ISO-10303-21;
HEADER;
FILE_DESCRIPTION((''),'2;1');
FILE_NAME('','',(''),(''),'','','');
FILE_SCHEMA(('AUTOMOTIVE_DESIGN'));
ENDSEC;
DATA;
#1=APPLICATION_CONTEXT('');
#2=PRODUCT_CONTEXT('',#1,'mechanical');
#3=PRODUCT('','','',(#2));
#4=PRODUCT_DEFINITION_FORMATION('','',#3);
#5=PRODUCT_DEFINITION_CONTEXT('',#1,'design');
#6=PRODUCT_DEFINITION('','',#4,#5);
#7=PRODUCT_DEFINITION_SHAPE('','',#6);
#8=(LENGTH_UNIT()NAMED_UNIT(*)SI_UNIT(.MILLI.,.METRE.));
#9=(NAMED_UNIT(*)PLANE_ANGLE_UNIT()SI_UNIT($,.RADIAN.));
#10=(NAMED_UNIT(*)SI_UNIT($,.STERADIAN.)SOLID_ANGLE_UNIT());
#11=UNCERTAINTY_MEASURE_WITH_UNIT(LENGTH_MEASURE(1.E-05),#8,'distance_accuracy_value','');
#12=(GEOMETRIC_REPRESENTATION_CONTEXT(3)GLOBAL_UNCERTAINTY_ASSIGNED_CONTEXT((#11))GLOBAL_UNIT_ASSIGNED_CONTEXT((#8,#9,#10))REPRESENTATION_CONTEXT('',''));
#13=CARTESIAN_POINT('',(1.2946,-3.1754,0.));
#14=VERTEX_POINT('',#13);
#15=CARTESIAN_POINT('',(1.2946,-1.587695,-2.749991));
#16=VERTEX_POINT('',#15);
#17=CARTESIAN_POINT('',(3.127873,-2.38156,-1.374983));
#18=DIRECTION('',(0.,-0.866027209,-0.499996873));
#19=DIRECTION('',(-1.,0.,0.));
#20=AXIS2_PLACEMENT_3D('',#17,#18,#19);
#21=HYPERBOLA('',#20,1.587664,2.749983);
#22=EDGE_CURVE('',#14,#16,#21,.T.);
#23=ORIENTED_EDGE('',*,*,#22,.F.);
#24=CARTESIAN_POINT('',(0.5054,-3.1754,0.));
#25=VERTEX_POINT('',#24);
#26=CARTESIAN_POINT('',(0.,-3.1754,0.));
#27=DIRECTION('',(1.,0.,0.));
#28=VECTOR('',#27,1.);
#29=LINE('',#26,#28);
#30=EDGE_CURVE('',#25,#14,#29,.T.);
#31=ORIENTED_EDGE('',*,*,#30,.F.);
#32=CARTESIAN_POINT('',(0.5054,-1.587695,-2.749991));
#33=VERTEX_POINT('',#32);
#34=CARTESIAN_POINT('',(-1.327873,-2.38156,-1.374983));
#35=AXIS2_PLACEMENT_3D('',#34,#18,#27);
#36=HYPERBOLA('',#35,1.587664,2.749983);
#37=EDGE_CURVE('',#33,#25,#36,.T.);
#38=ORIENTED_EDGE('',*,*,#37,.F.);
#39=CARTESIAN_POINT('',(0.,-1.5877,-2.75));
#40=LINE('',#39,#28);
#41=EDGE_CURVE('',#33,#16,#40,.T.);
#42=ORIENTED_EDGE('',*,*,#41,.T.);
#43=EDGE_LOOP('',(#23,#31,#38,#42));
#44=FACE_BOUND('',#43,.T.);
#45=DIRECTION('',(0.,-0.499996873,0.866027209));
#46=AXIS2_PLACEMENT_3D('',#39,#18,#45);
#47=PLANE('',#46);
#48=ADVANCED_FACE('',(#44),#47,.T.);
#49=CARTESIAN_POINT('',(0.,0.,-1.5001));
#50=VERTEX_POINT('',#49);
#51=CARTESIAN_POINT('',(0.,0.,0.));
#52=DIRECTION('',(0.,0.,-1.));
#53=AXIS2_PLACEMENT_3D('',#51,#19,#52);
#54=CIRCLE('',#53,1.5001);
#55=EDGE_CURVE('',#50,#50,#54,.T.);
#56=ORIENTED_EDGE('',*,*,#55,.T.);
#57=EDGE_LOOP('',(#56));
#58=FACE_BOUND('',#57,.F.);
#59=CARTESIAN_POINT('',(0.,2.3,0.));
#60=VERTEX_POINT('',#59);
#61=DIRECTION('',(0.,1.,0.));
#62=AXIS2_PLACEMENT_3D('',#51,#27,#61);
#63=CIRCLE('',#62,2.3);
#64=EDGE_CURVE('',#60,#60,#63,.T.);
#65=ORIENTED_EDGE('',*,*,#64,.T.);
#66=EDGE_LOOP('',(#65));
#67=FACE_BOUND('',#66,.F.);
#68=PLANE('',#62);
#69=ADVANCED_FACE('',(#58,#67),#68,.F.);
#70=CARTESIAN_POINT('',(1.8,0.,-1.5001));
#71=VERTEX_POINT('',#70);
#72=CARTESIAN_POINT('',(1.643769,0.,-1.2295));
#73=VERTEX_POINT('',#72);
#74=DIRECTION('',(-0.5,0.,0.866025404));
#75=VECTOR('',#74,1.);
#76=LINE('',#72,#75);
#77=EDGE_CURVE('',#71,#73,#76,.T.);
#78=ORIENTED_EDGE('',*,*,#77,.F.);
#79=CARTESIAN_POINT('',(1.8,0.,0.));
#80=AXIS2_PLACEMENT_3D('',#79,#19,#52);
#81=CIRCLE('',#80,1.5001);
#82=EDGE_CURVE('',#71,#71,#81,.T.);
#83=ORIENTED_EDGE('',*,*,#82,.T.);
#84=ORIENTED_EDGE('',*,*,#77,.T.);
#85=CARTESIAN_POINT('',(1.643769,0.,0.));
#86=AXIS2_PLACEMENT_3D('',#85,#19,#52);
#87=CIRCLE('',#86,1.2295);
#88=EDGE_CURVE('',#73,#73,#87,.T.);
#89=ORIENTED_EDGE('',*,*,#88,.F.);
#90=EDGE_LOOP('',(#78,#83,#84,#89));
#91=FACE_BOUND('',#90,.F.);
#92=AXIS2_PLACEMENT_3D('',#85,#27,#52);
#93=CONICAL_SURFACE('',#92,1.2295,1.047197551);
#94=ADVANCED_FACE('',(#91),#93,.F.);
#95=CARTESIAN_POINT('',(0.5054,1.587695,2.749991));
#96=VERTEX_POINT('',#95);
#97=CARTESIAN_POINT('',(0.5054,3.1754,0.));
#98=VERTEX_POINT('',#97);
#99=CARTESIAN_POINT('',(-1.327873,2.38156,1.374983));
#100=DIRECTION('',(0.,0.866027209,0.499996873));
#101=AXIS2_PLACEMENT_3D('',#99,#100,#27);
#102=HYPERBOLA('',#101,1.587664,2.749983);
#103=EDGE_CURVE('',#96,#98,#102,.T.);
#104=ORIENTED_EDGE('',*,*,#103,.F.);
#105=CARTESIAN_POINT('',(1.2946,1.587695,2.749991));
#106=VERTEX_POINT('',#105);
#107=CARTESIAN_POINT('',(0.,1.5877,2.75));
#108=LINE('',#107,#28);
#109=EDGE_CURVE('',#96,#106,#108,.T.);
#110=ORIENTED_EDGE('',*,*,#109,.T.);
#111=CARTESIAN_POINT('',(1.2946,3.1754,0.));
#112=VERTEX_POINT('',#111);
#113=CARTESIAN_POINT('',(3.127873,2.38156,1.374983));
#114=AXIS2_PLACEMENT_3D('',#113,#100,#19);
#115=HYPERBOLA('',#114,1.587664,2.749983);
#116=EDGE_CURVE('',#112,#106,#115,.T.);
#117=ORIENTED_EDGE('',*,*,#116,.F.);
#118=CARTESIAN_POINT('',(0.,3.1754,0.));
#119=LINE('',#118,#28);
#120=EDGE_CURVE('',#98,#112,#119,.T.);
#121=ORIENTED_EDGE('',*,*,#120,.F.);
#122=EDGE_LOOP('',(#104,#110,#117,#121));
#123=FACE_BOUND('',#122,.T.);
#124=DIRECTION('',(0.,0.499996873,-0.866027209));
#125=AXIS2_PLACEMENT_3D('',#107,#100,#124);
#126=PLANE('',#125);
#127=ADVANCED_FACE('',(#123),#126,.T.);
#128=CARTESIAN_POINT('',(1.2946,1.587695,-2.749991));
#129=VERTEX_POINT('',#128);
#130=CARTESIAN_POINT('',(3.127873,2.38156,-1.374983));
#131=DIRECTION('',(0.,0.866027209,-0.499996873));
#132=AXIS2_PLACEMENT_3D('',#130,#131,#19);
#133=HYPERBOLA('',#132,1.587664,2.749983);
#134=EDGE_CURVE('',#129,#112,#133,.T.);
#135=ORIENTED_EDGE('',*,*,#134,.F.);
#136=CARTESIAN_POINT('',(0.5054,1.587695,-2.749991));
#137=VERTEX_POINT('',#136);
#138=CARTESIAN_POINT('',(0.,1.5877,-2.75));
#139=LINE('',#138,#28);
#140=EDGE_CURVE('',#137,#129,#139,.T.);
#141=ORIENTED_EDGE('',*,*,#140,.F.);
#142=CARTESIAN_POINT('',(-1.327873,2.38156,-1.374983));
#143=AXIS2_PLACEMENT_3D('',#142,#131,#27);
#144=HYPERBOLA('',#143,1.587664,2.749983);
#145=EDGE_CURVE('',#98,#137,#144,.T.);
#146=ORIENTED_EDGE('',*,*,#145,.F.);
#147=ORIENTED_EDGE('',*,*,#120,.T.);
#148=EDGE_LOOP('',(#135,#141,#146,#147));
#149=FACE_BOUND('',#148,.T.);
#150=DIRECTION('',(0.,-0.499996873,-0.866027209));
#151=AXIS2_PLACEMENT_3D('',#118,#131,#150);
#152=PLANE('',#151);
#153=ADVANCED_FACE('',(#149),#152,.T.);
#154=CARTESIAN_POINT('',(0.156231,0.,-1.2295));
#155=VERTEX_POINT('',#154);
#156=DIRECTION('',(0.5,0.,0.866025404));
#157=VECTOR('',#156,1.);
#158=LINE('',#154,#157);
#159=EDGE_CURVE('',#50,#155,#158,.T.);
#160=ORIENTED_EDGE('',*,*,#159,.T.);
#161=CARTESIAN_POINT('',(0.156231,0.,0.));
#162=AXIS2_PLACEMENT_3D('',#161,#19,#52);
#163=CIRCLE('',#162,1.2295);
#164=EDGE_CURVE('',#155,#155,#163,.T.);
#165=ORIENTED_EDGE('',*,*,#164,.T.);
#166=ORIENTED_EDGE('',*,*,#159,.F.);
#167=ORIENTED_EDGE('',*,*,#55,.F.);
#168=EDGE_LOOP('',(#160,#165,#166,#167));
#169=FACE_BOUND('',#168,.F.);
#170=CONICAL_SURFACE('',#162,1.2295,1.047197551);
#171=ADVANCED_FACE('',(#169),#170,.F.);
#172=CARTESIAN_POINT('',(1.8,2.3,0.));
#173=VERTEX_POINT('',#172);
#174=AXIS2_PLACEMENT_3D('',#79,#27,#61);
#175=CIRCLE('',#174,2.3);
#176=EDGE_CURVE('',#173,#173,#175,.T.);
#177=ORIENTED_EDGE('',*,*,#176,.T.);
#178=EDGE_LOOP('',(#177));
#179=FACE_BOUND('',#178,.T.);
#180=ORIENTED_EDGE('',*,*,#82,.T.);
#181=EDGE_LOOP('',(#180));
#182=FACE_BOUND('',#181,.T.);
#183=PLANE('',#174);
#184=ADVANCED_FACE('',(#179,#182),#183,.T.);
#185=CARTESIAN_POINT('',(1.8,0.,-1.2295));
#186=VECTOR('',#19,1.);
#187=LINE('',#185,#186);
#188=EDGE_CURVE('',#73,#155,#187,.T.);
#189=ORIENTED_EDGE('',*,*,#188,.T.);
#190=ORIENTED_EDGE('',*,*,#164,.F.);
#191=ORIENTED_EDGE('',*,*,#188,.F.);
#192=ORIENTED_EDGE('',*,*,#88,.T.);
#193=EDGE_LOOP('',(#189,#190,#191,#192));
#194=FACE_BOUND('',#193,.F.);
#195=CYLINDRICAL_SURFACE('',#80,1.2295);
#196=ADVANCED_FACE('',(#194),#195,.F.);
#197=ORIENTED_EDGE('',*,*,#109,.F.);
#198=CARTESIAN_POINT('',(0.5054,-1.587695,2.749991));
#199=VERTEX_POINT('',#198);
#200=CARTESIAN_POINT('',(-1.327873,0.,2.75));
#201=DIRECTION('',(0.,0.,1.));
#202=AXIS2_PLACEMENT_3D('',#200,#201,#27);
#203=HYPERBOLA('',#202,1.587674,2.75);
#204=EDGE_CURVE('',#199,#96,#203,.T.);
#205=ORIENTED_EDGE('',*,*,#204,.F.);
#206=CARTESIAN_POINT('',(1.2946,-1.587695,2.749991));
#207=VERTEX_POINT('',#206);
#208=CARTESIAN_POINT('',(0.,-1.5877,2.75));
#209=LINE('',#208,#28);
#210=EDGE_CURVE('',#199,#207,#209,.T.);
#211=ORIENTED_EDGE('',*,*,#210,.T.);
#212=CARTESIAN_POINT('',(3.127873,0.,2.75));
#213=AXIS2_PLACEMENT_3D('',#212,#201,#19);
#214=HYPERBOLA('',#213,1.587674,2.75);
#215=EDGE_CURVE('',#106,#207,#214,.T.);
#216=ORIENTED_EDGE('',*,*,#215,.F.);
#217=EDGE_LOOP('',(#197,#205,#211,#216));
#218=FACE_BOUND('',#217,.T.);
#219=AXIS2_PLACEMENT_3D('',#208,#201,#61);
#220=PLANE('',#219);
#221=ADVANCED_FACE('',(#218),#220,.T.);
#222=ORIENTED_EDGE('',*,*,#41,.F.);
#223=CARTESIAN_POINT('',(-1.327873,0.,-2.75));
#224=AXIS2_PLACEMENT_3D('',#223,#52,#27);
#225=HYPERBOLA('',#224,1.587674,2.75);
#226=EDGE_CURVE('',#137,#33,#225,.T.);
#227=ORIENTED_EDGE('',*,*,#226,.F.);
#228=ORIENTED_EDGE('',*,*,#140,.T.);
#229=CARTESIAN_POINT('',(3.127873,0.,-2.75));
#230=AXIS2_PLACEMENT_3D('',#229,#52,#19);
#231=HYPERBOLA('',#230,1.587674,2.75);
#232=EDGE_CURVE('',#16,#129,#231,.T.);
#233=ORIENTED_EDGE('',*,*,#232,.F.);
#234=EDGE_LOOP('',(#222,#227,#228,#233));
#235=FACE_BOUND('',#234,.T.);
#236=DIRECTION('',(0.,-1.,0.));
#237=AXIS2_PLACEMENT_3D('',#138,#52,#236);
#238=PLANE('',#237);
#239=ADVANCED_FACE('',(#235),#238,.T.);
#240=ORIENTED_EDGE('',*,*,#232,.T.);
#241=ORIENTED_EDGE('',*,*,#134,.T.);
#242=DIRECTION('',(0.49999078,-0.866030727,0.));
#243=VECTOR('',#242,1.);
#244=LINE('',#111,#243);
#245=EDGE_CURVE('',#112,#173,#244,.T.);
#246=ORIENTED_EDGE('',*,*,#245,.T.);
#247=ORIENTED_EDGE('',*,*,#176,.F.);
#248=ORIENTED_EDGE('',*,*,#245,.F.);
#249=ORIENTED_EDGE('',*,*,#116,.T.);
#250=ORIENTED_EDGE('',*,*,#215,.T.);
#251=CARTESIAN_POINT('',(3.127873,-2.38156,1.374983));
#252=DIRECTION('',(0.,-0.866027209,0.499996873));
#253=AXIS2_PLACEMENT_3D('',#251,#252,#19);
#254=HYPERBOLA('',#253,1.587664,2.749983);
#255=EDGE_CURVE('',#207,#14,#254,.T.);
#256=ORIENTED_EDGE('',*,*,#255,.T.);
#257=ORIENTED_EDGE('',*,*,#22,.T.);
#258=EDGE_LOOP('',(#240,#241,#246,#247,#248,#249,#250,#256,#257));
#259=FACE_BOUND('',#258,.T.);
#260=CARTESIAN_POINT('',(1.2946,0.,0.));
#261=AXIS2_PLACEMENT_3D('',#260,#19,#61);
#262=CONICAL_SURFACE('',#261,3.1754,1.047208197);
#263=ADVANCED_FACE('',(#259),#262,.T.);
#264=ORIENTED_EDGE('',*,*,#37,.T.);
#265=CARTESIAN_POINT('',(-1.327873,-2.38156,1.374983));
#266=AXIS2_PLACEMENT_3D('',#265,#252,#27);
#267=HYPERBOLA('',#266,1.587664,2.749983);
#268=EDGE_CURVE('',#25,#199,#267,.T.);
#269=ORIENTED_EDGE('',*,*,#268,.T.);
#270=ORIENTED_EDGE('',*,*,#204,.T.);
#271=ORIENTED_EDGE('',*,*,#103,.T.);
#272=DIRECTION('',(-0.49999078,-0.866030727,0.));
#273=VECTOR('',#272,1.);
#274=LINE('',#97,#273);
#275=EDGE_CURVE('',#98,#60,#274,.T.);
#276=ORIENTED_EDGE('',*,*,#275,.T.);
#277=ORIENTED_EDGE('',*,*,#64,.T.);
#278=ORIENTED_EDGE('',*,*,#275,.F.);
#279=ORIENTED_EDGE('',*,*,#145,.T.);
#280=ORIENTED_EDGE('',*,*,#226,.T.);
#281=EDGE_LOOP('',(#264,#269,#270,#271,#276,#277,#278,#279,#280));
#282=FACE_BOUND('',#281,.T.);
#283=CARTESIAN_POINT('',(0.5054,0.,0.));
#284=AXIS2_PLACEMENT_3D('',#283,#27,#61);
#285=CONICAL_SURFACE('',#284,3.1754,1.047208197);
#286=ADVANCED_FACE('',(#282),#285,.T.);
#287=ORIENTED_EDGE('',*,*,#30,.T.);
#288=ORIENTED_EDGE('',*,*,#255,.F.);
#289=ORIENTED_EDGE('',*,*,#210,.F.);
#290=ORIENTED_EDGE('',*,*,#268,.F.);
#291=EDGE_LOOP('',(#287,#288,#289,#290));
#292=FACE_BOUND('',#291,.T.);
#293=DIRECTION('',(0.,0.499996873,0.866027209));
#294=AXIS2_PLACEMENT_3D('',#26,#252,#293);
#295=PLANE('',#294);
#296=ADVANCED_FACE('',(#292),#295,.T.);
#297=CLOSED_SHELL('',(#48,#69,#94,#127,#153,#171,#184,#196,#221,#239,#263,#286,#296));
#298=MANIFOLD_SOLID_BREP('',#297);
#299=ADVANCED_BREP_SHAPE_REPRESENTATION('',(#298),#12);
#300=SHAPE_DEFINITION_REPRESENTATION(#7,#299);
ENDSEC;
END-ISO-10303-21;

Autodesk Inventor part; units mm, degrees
ref_plane "YZ Plane" through (0, 0, 0) normal (1, 0, 0) x (0, 1, 0)
ref_plane "XZ Plane" through (0, 0, 0) normal (0, 1, 0) x (-1, 0, 0)
sketch "Esquisse1" plane through (0, 0, 0) normal (1, 0, 0) x (0, 1, 0)
  line L0 (-3.1754, 0) -> (-1.5877, 2.75)
  line L1 (-1.5877, 2.75) -> (1.5877, 2.75)
  line L2 (1.5877, 2.75) -> (3.1754, 0)
  line L3 (3.1754, 0) -> (1.5877, -2.75)
  line L4 (1.5877, -2.75) -> (-1.5877, -2.75)
  line L5 (-1.5877, -2.75) -> (-3.1754, 0)
  point P0 (0, 0)
  point P1 (0, 0)
  dimension "d0" = 6.3509
extrude "Corps" add sketch "Esquisse1" along normal blind 1.8
sketch "Esquisse2" plane through (0, 0, 0) normal (0, 0, 1) x (1, 0, 0)
  line L0 (0, 1.5877) -> (0, 3.1754) projected
  line L1 (0, 3.1754) -> (1.8, 3.1754) projected
  line L2 (1.8, 1.5877) -> (1.8, 3.1754) projected
  line L3 (-0.36, 0) -> (2.16, 0) projected
  line L4 (0.5054, 3.1754) -> (0, 2.3)
  line L5 (1.2946, 3.1754) -> (1.8, 2.3)
  dimension "d3" = 30
  dimension "d4" = 30
  dimension "d5" = 4.6
  dimension "d6" = 4.6
revolve "Chanfrein1" cut sketch "Esquisse2" angle 360 about axis through (-10, 0, 0) along (1, 0, 0)
sketch "Esquisse3" plane through (1.8, 0, 0) normal (1, 0, 0) x (0, 0, -1)
  arc A0 (-0.625, -1.0825) -> (0.625, -1.0825) centre (0, 0) ccw projected
hole "Filetage" at (1.8, 0, 0) direction (-1, 0, 0) diameter 2.459 end through all thread size "M3x0.5" class "6H" standard "ISO Metric profile"
chamfer "Chanfrein2" distance 0.2706 angle 30 1 edges at (1.8, 0, 1.2295) measured on face at (1.8, 1.9179, -0.2329)
chamfer "Chanfrein3" distance 0.2706 angle 30 1 edges at (0, 0, 1.2295) measured on face at (0, 1.9179, -0.2329)
ref_plane "Work Plane1" through (-6.7921, 0, 0) normal (0, -0.8660254, -0.5) x (1, 0, 0)
equation "\"d0\" = 1.1547 * SW"
equation "\"d1\" = KOH"
equation "\"d3\" = ANG1"
equation "\"d4\" = ANG2"
equation "\"d5\" = SW0"
equation "\"d6\" = SW01"
equation "\"d8\" = -0.5 * GD1 + 0.5 * NND"
equation "\"d40\" = -0.5 * GD1 + 0.5 * NND"
equation "\"d10\" = -0.5 * GD1 + 0.5 * NND"
equation "\"d41\" = -0.5 * GD1 + 0.5 * NND"
equation "\"ANG1\" = 30deg"
equation "\"ANG2\" = 30deg"
equation "\"NND\" = 3"
equation "\"KOH\" = 1.8"
equation "\"SW\" = 5.5"
equation "\"SW0\" = 4.6"
equation "\"SW01\" = SW0"
equation "\"GUL\" = 0.541266 * PTC"
equation "\"THREADDIA\" = 3"
equation "\"TOA\" = 30deg"
equation "\"PTC\" = 0.5"
equation "\"E0\" = 1.155 * SW"
equation "\"GAL\" = 0.541266 * PTC"
equation "\"GD1\" = 2.458734"
properties part number "ISO 4035 - M3" material "Acier inoxydable 440C"
